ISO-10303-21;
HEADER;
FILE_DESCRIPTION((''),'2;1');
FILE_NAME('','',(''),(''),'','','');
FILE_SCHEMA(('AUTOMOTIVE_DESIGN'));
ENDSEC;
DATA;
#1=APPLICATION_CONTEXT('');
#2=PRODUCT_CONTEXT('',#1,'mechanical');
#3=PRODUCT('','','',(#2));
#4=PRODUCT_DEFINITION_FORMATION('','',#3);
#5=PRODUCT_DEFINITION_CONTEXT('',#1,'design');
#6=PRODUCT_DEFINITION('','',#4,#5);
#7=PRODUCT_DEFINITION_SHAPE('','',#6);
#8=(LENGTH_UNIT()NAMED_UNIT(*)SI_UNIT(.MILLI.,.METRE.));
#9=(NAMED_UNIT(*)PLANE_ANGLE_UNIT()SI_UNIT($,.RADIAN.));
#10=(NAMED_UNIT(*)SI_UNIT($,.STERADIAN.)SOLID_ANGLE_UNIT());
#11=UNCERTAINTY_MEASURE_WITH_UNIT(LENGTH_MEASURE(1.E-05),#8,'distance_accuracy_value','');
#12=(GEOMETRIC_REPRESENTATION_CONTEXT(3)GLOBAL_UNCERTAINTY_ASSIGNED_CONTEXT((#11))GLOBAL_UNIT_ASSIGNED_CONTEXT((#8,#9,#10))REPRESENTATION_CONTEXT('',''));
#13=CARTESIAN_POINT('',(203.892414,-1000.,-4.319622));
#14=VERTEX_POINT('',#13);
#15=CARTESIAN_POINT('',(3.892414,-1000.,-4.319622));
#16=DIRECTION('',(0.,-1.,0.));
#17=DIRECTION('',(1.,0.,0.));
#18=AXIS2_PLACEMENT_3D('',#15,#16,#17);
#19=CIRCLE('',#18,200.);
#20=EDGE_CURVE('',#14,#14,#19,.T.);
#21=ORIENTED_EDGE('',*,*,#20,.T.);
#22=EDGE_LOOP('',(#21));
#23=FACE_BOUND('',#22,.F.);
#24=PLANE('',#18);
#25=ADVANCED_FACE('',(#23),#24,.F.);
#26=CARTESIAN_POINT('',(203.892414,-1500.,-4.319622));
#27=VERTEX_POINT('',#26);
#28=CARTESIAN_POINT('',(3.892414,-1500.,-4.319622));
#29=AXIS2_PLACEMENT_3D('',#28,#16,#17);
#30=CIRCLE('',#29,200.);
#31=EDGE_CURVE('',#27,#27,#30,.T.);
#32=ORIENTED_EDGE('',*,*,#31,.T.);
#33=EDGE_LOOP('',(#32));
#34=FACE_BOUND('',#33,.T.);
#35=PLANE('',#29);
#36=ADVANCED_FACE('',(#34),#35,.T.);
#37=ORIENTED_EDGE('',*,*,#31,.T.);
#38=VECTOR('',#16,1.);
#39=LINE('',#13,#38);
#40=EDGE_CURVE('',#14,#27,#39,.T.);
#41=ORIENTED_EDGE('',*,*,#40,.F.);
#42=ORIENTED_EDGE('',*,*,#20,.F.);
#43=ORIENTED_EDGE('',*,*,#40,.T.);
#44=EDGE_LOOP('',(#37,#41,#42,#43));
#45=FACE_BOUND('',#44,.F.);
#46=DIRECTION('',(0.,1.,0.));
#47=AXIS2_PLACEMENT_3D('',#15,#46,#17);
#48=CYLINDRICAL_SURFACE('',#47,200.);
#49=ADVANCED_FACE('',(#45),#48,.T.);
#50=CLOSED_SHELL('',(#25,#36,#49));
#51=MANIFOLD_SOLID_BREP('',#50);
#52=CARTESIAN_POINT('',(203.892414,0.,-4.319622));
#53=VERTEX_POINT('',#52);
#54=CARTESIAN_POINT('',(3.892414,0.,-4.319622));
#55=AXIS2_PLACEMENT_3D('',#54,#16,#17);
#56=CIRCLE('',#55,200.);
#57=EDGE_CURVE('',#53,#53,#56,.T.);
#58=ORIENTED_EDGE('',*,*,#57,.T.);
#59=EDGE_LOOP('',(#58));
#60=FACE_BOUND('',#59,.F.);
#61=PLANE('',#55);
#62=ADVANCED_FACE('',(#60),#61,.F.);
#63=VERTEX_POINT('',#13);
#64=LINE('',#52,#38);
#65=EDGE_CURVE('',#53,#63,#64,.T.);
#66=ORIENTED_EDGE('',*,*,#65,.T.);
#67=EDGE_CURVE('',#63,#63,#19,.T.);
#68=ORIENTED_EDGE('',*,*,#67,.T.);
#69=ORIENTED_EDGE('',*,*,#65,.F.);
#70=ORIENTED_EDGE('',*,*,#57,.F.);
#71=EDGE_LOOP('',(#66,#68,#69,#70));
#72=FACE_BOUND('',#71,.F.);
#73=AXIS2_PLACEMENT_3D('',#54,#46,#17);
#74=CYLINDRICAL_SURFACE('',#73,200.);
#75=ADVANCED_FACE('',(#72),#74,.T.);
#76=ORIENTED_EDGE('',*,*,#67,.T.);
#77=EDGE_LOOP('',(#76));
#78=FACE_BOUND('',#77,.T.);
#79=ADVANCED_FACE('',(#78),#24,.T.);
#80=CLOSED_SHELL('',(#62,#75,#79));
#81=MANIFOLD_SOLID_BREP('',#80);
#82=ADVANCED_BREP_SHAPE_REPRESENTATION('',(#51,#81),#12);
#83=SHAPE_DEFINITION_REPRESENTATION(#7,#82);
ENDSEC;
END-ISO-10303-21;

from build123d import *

# Parameters (mm, degrees)
F0_R     = 200
F1_DEPTH = 1000
F2_R     = 200
F3_DEPTH = 500


# Not quite as in the source:
# - a feature names something its author has since deleted; it is built from what else it names


with BuildPart() as f1:
    # F0 (on Front) → F1 (new body)
    with BuildSketch(Plane.XZ):
        with Locations((3.8924142718, -4.3196221814)):
            Circle(F0_R)
    extrude(amount=F1_DEPTH)


with BuildPart() as f3:
    # F2 (on face) → F3 (new body)
    with BuildSketch(Plane.XZ.offset(1000)):
        with Locations((3.8924142718, -4.3196221814)):
            Circle(F2_R)
    extrude(amount=F3_DEPTH)


solid = Compound([f1.part, f3.part])
